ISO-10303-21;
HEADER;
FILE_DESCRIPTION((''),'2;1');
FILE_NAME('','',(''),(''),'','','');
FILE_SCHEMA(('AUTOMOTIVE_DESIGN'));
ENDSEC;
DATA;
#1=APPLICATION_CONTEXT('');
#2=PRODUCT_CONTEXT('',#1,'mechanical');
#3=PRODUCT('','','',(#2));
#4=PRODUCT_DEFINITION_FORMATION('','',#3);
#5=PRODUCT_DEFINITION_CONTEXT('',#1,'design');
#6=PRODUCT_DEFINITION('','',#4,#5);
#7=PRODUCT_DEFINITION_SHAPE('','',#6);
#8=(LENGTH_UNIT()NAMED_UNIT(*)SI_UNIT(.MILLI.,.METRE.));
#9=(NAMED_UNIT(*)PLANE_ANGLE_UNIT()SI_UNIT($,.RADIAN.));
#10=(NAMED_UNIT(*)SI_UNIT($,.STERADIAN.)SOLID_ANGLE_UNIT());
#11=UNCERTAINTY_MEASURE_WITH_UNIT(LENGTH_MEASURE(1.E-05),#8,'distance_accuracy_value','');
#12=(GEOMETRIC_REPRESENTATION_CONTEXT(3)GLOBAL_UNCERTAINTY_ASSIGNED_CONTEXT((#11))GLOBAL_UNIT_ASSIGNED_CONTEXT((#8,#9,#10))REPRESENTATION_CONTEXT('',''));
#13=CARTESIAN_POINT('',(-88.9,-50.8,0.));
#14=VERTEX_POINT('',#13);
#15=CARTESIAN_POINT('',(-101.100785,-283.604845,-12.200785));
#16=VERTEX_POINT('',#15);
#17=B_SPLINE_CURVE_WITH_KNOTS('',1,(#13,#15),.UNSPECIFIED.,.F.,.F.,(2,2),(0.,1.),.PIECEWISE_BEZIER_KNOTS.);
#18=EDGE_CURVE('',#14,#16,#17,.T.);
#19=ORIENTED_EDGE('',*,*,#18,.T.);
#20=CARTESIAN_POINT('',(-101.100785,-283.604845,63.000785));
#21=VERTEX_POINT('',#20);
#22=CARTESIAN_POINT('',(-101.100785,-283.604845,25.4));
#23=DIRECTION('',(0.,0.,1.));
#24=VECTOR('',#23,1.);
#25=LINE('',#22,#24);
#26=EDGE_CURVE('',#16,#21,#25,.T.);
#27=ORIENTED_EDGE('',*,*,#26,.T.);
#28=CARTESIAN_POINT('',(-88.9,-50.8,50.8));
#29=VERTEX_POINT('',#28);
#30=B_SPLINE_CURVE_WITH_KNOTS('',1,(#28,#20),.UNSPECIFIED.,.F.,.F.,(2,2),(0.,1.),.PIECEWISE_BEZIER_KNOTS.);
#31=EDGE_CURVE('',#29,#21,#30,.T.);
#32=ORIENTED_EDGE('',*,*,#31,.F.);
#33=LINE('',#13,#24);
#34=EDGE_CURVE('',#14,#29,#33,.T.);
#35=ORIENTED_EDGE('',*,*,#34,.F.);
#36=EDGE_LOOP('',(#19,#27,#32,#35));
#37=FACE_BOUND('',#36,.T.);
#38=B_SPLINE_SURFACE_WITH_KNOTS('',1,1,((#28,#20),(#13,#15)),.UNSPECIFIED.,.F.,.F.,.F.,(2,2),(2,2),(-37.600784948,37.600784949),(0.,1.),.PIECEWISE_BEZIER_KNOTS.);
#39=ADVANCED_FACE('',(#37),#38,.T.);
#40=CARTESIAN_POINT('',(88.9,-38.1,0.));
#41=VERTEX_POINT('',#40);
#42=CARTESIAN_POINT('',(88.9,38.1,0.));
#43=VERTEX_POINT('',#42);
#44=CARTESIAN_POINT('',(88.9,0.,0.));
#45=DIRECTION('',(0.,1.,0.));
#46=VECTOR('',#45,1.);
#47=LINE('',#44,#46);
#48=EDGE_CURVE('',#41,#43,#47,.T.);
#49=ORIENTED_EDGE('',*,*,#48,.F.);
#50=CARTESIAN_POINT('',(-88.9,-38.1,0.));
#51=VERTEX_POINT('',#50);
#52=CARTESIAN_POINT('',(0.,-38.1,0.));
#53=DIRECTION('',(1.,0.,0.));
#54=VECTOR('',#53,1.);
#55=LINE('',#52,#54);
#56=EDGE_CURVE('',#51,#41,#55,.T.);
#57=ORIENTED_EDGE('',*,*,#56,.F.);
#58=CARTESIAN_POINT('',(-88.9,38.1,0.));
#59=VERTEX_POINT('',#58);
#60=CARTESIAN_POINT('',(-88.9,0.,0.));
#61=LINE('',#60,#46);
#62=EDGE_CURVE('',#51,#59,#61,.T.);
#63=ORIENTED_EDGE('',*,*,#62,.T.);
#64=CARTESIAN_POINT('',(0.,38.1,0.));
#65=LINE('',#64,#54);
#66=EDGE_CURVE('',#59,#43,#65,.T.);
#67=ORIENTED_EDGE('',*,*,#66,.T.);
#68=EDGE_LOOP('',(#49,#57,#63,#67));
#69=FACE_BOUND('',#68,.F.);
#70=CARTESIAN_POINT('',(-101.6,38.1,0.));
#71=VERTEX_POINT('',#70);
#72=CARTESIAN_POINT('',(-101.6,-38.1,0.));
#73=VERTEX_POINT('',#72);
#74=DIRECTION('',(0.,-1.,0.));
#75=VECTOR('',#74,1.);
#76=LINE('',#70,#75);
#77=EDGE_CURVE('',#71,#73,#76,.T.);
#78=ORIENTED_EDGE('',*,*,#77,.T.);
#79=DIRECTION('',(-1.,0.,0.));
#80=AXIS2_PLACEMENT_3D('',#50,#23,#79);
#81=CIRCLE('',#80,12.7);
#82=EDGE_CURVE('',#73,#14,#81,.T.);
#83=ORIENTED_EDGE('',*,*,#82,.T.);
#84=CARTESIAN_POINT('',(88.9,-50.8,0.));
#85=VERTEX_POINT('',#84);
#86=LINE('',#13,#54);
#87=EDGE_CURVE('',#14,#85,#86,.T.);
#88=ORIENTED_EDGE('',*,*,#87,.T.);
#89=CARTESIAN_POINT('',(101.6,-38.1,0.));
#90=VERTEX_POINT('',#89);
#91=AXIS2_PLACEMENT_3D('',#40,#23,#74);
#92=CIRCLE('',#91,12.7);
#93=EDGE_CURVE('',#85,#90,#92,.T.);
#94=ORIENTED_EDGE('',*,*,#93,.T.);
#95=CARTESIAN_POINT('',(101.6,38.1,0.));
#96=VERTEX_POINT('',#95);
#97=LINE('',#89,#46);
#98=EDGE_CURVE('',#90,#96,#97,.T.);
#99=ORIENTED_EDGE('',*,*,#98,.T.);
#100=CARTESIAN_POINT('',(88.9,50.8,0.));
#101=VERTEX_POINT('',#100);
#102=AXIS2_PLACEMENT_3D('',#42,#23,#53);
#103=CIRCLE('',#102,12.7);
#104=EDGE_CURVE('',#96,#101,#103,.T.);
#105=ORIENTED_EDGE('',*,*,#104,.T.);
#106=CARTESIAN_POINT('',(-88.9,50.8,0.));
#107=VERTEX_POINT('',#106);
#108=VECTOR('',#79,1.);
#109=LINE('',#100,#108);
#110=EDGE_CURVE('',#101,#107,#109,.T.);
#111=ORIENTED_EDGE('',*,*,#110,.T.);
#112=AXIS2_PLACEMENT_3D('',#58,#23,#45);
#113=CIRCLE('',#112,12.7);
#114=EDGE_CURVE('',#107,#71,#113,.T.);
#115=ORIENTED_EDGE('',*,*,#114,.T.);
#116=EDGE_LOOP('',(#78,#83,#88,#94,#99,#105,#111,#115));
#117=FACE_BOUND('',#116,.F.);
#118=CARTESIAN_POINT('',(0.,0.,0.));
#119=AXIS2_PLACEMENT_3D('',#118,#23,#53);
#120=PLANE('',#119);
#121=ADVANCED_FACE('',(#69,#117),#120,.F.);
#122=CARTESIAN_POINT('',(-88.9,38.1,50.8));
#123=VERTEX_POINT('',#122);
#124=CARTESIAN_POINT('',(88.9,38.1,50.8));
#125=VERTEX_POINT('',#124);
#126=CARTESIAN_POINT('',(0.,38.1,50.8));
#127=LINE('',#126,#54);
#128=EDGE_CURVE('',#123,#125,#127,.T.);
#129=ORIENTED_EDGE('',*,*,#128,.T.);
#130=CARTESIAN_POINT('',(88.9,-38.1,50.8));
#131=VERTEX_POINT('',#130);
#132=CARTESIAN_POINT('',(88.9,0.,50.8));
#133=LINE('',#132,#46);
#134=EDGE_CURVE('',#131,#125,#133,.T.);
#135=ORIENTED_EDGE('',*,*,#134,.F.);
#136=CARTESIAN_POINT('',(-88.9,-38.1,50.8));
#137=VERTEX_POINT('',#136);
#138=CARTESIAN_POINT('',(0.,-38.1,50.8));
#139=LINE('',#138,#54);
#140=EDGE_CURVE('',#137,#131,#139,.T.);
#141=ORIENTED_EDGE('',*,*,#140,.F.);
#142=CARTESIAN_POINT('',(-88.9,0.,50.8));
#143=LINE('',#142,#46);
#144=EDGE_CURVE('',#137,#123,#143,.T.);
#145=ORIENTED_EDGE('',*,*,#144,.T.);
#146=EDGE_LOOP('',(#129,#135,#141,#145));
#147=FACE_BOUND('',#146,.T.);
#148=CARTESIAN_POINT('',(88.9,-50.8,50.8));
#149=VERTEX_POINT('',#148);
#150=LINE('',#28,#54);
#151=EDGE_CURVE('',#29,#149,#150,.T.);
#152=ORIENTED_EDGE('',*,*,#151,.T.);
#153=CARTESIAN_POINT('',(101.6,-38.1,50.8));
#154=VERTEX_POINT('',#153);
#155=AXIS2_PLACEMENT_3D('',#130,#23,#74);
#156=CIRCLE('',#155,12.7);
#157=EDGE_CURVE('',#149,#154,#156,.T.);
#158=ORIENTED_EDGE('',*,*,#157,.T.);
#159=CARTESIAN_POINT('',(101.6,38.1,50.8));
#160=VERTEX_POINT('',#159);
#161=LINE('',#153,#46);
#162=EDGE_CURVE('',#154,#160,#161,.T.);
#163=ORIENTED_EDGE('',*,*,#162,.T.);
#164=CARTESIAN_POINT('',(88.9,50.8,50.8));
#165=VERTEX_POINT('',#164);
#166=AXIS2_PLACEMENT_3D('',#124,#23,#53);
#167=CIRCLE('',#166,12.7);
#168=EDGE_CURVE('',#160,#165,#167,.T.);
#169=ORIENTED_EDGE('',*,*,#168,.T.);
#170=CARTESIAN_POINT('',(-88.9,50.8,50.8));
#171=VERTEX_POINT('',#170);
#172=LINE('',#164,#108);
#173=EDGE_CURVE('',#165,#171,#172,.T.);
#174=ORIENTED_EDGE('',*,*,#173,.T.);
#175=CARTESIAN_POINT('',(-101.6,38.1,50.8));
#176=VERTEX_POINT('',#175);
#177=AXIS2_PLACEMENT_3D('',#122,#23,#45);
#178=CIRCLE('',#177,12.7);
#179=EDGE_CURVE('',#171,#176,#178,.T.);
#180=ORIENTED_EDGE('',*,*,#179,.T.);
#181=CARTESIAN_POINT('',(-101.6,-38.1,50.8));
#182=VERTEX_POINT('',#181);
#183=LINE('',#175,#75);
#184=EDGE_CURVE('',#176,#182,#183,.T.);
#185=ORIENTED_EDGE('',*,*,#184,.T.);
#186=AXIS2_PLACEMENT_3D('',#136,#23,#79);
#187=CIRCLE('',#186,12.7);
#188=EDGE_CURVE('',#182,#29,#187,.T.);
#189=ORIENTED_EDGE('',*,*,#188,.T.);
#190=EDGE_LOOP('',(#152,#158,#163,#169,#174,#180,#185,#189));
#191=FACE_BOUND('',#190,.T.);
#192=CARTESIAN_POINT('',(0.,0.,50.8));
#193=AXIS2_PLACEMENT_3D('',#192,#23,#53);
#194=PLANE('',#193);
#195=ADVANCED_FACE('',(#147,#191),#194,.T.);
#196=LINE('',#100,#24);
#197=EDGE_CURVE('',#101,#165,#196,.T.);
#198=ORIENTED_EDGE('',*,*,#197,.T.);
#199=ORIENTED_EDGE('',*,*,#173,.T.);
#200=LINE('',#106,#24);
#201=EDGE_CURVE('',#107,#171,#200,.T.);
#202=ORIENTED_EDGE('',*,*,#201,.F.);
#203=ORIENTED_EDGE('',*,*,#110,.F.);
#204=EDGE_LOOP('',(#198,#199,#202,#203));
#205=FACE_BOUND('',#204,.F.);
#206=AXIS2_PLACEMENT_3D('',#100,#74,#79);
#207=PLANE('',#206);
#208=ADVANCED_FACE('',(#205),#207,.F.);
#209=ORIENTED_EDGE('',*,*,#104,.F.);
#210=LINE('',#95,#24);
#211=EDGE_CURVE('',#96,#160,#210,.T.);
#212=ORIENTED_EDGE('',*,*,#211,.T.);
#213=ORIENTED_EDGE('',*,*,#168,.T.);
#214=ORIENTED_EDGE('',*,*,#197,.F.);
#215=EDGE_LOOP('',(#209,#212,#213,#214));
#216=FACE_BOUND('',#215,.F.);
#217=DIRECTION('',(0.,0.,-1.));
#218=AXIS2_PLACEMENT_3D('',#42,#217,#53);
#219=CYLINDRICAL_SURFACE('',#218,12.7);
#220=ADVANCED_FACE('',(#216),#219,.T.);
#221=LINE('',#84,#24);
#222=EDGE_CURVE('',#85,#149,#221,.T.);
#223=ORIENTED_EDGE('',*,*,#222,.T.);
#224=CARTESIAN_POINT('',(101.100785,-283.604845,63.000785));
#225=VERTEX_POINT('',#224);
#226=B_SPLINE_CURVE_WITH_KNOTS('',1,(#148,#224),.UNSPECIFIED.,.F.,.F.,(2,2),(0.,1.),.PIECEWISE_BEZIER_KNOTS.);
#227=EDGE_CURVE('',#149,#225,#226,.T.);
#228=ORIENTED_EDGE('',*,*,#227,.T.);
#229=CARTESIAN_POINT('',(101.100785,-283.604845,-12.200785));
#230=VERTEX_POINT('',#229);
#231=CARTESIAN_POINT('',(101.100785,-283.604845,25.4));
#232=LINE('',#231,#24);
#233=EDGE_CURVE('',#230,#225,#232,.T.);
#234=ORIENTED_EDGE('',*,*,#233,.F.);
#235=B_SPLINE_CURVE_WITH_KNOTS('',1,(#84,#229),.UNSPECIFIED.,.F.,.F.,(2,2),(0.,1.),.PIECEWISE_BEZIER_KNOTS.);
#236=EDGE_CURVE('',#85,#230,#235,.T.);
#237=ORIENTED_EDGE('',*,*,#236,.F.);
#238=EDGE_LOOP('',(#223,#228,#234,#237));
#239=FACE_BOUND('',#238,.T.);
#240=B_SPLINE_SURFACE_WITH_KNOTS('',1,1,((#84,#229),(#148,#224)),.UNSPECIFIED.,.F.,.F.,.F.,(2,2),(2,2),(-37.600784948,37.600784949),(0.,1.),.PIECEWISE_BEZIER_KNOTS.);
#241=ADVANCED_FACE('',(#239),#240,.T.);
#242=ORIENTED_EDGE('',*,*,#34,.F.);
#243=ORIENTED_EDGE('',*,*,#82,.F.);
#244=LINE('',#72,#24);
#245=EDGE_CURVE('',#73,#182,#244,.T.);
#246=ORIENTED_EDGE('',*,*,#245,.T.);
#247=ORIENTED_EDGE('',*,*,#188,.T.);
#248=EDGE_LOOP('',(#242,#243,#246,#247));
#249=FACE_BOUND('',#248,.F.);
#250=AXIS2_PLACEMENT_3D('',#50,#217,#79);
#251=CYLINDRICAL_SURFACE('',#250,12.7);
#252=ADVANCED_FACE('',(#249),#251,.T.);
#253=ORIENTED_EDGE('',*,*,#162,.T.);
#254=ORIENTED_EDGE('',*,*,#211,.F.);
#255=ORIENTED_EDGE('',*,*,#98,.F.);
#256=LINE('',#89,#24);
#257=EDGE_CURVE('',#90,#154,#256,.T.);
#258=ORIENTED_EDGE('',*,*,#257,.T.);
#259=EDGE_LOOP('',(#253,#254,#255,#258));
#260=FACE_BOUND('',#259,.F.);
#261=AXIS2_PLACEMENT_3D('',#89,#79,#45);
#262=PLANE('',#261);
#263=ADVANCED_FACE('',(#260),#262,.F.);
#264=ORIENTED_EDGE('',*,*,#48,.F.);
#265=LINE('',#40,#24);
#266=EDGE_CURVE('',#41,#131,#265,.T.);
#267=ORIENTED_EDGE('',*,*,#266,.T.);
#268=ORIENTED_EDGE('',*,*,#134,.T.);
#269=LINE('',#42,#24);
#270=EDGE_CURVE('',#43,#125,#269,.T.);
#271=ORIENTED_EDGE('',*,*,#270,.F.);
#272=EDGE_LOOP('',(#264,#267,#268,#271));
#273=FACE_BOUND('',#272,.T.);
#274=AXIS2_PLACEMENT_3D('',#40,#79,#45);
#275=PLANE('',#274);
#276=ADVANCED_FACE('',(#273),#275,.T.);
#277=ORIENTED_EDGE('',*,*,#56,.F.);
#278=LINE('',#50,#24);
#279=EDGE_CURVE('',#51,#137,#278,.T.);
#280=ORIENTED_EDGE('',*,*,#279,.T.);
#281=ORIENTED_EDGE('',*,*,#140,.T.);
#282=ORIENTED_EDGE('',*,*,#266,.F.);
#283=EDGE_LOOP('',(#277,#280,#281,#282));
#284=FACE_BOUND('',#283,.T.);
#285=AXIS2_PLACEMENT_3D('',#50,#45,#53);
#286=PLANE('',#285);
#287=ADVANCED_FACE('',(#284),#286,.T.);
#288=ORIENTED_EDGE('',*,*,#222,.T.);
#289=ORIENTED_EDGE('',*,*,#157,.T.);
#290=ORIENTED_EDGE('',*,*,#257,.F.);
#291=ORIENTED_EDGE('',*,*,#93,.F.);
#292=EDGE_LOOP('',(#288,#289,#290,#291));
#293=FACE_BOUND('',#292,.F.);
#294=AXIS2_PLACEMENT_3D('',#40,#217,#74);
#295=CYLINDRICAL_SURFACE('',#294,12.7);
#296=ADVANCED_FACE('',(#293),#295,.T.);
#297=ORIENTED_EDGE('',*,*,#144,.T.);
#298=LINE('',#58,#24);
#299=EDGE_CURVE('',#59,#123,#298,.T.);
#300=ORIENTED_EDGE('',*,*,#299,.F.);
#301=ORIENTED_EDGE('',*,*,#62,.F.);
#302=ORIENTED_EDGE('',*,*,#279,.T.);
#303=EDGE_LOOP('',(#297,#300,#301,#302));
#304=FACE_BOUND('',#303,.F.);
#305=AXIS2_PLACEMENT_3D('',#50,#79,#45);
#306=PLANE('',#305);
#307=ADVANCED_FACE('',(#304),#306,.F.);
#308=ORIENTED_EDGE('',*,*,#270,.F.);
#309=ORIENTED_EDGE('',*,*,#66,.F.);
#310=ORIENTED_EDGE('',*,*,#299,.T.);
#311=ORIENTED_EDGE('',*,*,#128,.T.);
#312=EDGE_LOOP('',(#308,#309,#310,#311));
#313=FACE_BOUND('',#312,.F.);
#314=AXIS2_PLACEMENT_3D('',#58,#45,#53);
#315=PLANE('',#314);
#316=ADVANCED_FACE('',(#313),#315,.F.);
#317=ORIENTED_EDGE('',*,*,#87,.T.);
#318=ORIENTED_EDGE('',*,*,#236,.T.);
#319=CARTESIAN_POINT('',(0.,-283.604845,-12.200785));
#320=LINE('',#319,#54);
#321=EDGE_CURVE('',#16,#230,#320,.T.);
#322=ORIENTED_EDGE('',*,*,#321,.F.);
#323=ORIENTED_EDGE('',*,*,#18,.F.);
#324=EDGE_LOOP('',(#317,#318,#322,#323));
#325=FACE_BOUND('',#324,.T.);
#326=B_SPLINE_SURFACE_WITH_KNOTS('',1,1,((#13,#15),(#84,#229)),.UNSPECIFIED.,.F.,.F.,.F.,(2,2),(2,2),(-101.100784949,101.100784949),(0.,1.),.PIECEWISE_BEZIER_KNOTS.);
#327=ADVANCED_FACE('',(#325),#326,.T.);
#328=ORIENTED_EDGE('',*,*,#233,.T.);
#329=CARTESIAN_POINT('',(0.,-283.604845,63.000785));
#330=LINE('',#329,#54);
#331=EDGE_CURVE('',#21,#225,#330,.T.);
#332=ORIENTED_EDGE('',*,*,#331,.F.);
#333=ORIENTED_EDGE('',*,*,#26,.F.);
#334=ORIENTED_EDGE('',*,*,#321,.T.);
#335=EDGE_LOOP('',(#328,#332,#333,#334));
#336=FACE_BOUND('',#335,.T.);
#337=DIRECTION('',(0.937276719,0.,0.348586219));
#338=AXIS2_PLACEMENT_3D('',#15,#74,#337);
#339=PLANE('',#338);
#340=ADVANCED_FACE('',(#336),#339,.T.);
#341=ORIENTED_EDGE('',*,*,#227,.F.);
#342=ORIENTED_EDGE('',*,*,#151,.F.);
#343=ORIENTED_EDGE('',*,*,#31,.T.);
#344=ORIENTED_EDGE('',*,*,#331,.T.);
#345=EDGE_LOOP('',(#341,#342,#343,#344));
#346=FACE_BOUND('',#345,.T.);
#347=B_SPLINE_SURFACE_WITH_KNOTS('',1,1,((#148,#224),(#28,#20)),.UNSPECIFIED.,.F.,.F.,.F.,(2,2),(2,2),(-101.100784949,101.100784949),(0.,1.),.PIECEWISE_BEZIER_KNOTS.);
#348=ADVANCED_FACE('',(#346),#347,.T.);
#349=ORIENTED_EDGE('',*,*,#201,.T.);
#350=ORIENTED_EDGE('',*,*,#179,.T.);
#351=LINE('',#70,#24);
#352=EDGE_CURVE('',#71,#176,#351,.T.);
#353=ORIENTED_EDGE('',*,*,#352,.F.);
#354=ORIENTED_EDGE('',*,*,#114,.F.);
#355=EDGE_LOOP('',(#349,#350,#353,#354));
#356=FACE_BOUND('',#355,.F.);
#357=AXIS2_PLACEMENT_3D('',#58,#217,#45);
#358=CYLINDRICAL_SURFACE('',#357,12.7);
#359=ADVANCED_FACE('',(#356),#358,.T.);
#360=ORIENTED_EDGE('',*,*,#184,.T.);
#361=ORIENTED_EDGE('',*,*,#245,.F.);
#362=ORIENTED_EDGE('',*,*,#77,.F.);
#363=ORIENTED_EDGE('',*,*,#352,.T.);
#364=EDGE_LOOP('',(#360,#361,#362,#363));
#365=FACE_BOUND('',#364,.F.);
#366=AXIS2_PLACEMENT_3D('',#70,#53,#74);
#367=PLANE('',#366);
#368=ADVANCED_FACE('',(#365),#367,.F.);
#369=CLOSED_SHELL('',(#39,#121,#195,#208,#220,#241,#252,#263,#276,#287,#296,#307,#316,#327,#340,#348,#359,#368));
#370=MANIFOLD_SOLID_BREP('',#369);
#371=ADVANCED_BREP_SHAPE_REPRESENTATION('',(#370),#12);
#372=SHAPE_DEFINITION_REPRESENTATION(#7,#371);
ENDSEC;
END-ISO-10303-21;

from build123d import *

# Parameters (mm, degrees)
F0_W     = 177.8
F0_H     = 76.2
F1_DEPTH = 50.8
F2_W     = 177.8
F2_H     = 50.8
F3_DEPTH = 232.8048453
F3_TAPER = -3


# Not quite as in the source:
# - an extrude ends at something that could not be found from the text; its depth is read off the source's solid


with BuildPart() as f1:
    # F0 (on Top) → F1 (new body)
    with BuildSketch(Plane.XY):
        with BuildLine():
            ThreePointArc((101.6, 38.1), (97.8802561211, 47.0802561211), (88.9, 50.8))
            Line((88.9, 50.8), (-88.9, 50.8))
            ThreePointArc((-88.9, 50.8), (-97.8802561211, 47.0802561211), (-101.6, 38.1))
            Line((-101.6, 38.1), (-101.6, -38.1))
            ThreePointArc((-101.6, -38.1), (-97.8802561211, -47.0802561211), (-88.9, -50.8))
            Line((-88.9, -50.8), (88.9, -50.8))
            ThreePointArc((88.9, -50.8), (97.8802561211, -47.0802561211), (101.6, -38.1))
            Line((101.6, -38.1), (101.6, 38.1))
        make_face()
        Rectangle(F0_W, F0_H, mode=Mode.SUBTRACT)
    extrude(amount=F1_DEPTH)

    # F2 (on face) → F3 (join, through all)
    with BuildSketch(Plane.XZ.offset(50.8)):
        with Locations((0, 25.4)):
            Rectangle(F2_W, F2_H)
    extrude(amount=F3_DEPTH, taper=F3_TAPER)


solid = f1.part
